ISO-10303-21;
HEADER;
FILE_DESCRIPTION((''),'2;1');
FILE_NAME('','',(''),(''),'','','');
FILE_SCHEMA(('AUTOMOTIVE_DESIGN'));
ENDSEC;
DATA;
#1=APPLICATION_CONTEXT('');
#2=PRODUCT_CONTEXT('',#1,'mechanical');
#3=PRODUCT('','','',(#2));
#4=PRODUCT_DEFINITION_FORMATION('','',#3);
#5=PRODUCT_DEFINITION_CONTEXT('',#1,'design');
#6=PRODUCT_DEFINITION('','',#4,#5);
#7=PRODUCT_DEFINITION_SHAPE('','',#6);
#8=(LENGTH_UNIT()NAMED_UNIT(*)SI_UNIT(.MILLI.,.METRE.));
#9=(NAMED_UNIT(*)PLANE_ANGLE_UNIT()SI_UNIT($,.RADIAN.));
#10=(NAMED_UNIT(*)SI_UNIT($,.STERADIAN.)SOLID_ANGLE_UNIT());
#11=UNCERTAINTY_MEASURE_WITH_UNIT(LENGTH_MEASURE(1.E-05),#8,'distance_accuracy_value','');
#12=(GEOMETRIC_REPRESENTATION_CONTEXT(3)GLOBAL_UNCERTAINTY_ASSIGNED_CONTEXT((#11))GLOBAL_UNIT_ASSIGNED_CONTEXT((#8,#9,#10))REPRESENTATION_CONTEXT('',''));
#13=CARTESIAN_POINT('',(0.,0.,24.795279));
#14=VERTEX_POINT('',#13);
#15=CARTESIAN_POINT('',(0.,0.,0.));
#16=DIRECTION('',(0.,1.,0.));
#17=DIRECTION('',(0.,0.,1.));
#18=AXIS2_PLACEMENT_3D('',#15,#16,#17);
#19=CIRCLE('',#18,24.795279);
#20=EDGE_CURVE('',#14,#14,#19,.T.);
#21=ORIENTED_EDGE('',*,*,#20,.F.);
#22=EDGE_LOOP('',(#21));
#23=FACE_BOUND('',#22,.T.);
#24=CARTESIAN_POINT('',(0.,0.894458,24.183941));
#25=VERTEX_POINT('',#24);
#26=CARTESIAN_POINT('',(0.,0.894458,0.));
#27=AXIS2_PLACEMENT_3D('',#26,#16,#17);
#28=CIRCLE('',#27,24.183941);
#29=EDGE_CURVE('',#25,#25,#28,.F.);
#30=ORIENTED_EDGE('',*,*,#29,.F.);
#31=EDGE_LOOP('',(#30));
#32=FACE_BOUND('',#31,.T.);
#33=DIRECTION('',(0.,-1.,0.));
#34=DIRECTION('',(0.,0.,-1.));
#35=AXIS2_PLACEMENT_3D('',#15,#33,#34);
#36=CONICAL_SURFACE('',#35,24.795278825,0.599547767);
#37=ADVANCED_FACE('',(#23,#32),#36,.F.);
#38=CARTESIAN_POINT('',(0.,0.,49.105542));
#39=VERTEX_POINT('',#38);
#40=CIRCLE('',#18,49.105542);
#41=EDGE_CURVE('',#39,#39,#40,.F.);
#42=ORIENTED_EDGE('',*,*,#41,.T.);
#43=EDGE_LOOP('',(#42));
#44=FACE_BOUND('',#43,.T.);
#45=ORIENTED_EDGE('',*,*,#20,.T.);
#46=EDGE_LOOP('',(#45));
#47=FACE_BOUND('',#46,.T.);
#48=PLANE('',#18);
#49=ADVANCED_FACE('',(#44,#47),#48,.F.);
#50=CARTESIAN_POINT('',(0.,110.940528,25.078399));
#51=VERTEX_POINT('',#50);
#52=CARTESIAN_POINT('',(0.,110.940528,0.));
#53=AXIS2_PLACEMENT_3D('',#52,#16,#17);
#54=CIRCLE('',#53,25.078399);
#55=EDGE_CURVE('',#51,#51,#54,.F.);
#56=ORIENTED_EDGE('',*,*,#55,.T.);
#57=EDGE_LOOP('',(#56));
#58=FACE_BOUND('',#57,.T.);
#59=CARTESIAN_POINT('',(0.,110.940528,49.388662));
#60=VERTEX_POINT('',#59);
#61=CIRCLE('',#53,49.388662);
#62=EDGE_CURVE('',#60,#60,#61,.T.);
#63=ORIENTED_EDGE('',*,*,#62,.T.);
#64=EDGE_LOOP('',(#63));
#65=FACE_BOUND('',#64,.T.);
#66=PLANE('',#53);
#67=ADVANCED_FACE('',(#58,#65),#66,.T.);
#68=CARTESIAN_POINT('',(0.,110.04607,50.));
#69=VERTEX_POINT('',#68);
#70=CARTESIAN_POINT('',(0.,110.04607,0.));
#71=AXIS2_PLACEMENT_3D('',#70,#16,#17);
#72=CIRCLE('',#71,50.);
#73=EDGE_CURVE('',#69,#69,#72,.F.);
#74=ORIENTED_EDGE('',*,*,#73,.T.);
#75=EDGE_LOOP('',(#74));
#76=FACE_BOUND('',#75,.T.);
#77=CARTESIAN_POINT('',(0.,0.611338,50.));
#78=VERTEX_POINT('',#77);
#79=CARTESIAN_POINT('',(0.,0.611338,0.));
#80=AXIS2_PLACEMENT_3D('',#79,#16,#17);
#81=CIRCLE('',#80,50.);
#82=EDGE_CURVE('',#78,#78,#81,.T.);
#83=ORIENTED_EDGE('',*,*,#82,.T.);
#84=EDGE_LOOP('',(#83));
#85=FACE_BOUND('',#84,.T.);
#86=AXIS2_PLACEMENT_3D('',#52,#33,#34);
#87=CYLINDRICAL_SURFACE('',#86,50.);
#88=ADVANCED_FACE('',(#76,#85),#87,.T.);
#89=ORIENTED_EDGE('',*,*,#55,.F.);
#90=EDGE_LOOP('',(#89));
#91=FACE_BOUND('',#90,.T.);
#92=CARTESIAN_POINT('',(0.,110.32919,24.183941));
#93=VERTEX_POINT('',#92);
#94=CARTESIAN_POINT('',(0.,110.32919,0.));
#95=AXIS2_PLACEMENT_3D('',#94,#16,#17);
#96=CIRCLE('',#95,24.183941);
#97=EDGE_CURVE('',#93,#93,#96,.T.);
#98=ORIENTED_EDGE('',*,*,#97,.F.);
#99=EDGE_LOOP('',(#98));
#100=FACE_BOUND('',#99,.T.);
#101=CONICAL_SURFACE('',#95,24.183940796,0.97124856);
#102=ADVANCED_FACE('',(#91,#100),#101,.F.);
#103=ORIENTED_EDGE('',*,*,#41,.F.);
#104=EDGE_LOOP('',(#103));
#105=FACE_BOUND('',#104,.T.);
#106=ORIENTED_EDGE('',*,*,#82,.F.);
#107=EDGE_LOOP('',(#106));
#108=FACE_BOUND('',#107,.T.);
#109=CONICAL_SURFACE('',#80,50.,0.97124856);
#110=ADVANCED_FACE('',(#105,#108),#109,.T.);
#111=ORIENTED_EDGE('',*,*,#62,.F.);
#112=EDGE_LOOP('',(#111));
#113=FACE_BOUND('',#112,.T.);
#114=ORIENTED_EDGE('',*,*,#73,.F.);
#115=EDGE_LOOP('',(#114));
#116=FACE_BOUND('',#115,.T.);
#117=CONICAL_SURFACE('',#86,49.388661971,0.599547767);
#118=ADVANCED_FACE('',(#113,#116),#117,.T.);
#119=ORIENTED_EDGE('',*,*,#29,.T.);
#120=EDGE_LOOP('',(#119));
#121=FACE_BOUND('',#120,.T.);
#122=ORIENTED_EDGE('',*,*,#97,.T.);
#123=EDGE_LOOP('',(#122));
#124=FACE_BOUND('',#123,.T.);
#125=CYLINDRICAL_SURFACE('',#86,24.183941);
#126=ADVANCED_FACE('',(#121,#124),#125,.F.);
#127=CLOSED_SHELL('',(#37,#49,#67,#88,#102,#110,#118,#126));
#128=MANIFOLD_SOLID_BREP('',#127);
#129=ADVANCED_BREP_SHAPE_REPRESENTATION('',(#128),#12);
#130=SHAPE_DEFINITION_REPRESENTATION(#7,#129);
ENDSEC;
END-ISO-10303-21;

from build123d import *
from OCP.BRepFilletAPI import BRepFilletAPI_MakeChamfer

# Parameters (mm, degrees)
SKETCH1_R           = 50
BOSS_EXTRUDE1_DEPTH = 110.940527978
SKETCH2_R           = 24.183940796
CUT_EXTRUDE1_DEPTH  = 132.559115032
CHAMFER1_SIZE       = 0.894458048
CHAMFER1_SIZE2      = 0.611338029


with BuildPart() as part:
    # Sketch1 → Boss-Extrude1 (new body)
    with BuildSketch(Plane(origin=(0, 0, 0), x_dir=(1, 0, 0), z_dir=(0, 1, 0))):
        Circle(SKETCH1_R)
    extrude(amount=BOSS_EXTRUDE1_DEPTH)

    # Sketch2 → Cut-Extrude1 (cut, through all)
    with BuildSketch(Plane(origin=(0, 0, 0), x_dir=(1, 0, 0), z_dir=(0, 1, 0))):
        Circle(SKETCH2_R)
    extrude(amount=CUT_EXTRUDE1_DEPTH, mode=Mode.SUBTRACT)

    # Chamfer1: one chamfer whose edges measure the first distance from different faces: ONE call of the kernel's chamfer builder (chamfer() names one face for all edges)
    chamfer1_edges_1 = [part.edges().sort_by_distance(p)[0] for p in [
        (-24.183940796, 110.940527978, 0),
    ]]
    chamfer1_side_1 = [part.faces().sort_by_distance(p)[0] for p in [
        (-48.585786438, 110.940527978, 0),
    ]]
    chamfer1_edges_2 = [part.edges().sort_by_distance(p)[0] for p in [
        (-24.183940796, 0, 0),
    ]]
    chamfer1_side_2 = [part.faces().sort_by_distance(p)[0] for p in [
        (-24.183940796, 55.470263989, 0),
    ]]
    chamfer1_edges_3 = [part.edges().sort_by_distance(p)[0] for p in [
        (-50, 0, 0),
    ]]
    chamfer1_side_3 = [part.faces().sort_by_distance(p)[0] for p in [
        (-48.585786438, 0, 0),
    ]]
    chamfer1_edges_4 = [part.edges().sort_by_distance(p)[0] for p in [
        (-50, 110.940527978, 0),
    ]]
    chamfer1_side_4 = [part.faces().sort_by_distance(p)[0] for p in [
        (-50, 55.470263989, 0),
    ]]
    chamfer1 = BRepFilletAPI_MakeChamfer(part.part.solid().wrapped)
    for e in chamfer1_edges_1:
        chamfer1.Add(CHAMFER1_SIZE, CHAMFER1_SIZE2, e.wrapped, chamfer1_side_1[0].wrapped)  # the first distance lies on this face
    for e in chamfer1_edges_2:
        chamfer1.Add(CHAMFER1_SIZE, CHAMFER1_SIZE2, e.wrapped, chamfer1_side_2[0].wrapped)  # the first distance lies on this face
    for e in chamfer1_edges_3:
        chamfer1.Add(CHAMFER1_SIZE, CHAMFER1_SIZE2, e.wrapped, chamfer1_side_3[0].wrapped)  # the first distance lies on this face
    for e in chamfer1_edges_4:
        chamfer1.Add(CHAMFER1_SIZE, CHAMFER1_SIZE2, e.wrapped, chamfer1_side_4[0].wrapped)  # the first distance lies on this face
    add(Compound.cast(chamfer1.Shape()), mode=Mode.REPLACE)


solid = part.part
